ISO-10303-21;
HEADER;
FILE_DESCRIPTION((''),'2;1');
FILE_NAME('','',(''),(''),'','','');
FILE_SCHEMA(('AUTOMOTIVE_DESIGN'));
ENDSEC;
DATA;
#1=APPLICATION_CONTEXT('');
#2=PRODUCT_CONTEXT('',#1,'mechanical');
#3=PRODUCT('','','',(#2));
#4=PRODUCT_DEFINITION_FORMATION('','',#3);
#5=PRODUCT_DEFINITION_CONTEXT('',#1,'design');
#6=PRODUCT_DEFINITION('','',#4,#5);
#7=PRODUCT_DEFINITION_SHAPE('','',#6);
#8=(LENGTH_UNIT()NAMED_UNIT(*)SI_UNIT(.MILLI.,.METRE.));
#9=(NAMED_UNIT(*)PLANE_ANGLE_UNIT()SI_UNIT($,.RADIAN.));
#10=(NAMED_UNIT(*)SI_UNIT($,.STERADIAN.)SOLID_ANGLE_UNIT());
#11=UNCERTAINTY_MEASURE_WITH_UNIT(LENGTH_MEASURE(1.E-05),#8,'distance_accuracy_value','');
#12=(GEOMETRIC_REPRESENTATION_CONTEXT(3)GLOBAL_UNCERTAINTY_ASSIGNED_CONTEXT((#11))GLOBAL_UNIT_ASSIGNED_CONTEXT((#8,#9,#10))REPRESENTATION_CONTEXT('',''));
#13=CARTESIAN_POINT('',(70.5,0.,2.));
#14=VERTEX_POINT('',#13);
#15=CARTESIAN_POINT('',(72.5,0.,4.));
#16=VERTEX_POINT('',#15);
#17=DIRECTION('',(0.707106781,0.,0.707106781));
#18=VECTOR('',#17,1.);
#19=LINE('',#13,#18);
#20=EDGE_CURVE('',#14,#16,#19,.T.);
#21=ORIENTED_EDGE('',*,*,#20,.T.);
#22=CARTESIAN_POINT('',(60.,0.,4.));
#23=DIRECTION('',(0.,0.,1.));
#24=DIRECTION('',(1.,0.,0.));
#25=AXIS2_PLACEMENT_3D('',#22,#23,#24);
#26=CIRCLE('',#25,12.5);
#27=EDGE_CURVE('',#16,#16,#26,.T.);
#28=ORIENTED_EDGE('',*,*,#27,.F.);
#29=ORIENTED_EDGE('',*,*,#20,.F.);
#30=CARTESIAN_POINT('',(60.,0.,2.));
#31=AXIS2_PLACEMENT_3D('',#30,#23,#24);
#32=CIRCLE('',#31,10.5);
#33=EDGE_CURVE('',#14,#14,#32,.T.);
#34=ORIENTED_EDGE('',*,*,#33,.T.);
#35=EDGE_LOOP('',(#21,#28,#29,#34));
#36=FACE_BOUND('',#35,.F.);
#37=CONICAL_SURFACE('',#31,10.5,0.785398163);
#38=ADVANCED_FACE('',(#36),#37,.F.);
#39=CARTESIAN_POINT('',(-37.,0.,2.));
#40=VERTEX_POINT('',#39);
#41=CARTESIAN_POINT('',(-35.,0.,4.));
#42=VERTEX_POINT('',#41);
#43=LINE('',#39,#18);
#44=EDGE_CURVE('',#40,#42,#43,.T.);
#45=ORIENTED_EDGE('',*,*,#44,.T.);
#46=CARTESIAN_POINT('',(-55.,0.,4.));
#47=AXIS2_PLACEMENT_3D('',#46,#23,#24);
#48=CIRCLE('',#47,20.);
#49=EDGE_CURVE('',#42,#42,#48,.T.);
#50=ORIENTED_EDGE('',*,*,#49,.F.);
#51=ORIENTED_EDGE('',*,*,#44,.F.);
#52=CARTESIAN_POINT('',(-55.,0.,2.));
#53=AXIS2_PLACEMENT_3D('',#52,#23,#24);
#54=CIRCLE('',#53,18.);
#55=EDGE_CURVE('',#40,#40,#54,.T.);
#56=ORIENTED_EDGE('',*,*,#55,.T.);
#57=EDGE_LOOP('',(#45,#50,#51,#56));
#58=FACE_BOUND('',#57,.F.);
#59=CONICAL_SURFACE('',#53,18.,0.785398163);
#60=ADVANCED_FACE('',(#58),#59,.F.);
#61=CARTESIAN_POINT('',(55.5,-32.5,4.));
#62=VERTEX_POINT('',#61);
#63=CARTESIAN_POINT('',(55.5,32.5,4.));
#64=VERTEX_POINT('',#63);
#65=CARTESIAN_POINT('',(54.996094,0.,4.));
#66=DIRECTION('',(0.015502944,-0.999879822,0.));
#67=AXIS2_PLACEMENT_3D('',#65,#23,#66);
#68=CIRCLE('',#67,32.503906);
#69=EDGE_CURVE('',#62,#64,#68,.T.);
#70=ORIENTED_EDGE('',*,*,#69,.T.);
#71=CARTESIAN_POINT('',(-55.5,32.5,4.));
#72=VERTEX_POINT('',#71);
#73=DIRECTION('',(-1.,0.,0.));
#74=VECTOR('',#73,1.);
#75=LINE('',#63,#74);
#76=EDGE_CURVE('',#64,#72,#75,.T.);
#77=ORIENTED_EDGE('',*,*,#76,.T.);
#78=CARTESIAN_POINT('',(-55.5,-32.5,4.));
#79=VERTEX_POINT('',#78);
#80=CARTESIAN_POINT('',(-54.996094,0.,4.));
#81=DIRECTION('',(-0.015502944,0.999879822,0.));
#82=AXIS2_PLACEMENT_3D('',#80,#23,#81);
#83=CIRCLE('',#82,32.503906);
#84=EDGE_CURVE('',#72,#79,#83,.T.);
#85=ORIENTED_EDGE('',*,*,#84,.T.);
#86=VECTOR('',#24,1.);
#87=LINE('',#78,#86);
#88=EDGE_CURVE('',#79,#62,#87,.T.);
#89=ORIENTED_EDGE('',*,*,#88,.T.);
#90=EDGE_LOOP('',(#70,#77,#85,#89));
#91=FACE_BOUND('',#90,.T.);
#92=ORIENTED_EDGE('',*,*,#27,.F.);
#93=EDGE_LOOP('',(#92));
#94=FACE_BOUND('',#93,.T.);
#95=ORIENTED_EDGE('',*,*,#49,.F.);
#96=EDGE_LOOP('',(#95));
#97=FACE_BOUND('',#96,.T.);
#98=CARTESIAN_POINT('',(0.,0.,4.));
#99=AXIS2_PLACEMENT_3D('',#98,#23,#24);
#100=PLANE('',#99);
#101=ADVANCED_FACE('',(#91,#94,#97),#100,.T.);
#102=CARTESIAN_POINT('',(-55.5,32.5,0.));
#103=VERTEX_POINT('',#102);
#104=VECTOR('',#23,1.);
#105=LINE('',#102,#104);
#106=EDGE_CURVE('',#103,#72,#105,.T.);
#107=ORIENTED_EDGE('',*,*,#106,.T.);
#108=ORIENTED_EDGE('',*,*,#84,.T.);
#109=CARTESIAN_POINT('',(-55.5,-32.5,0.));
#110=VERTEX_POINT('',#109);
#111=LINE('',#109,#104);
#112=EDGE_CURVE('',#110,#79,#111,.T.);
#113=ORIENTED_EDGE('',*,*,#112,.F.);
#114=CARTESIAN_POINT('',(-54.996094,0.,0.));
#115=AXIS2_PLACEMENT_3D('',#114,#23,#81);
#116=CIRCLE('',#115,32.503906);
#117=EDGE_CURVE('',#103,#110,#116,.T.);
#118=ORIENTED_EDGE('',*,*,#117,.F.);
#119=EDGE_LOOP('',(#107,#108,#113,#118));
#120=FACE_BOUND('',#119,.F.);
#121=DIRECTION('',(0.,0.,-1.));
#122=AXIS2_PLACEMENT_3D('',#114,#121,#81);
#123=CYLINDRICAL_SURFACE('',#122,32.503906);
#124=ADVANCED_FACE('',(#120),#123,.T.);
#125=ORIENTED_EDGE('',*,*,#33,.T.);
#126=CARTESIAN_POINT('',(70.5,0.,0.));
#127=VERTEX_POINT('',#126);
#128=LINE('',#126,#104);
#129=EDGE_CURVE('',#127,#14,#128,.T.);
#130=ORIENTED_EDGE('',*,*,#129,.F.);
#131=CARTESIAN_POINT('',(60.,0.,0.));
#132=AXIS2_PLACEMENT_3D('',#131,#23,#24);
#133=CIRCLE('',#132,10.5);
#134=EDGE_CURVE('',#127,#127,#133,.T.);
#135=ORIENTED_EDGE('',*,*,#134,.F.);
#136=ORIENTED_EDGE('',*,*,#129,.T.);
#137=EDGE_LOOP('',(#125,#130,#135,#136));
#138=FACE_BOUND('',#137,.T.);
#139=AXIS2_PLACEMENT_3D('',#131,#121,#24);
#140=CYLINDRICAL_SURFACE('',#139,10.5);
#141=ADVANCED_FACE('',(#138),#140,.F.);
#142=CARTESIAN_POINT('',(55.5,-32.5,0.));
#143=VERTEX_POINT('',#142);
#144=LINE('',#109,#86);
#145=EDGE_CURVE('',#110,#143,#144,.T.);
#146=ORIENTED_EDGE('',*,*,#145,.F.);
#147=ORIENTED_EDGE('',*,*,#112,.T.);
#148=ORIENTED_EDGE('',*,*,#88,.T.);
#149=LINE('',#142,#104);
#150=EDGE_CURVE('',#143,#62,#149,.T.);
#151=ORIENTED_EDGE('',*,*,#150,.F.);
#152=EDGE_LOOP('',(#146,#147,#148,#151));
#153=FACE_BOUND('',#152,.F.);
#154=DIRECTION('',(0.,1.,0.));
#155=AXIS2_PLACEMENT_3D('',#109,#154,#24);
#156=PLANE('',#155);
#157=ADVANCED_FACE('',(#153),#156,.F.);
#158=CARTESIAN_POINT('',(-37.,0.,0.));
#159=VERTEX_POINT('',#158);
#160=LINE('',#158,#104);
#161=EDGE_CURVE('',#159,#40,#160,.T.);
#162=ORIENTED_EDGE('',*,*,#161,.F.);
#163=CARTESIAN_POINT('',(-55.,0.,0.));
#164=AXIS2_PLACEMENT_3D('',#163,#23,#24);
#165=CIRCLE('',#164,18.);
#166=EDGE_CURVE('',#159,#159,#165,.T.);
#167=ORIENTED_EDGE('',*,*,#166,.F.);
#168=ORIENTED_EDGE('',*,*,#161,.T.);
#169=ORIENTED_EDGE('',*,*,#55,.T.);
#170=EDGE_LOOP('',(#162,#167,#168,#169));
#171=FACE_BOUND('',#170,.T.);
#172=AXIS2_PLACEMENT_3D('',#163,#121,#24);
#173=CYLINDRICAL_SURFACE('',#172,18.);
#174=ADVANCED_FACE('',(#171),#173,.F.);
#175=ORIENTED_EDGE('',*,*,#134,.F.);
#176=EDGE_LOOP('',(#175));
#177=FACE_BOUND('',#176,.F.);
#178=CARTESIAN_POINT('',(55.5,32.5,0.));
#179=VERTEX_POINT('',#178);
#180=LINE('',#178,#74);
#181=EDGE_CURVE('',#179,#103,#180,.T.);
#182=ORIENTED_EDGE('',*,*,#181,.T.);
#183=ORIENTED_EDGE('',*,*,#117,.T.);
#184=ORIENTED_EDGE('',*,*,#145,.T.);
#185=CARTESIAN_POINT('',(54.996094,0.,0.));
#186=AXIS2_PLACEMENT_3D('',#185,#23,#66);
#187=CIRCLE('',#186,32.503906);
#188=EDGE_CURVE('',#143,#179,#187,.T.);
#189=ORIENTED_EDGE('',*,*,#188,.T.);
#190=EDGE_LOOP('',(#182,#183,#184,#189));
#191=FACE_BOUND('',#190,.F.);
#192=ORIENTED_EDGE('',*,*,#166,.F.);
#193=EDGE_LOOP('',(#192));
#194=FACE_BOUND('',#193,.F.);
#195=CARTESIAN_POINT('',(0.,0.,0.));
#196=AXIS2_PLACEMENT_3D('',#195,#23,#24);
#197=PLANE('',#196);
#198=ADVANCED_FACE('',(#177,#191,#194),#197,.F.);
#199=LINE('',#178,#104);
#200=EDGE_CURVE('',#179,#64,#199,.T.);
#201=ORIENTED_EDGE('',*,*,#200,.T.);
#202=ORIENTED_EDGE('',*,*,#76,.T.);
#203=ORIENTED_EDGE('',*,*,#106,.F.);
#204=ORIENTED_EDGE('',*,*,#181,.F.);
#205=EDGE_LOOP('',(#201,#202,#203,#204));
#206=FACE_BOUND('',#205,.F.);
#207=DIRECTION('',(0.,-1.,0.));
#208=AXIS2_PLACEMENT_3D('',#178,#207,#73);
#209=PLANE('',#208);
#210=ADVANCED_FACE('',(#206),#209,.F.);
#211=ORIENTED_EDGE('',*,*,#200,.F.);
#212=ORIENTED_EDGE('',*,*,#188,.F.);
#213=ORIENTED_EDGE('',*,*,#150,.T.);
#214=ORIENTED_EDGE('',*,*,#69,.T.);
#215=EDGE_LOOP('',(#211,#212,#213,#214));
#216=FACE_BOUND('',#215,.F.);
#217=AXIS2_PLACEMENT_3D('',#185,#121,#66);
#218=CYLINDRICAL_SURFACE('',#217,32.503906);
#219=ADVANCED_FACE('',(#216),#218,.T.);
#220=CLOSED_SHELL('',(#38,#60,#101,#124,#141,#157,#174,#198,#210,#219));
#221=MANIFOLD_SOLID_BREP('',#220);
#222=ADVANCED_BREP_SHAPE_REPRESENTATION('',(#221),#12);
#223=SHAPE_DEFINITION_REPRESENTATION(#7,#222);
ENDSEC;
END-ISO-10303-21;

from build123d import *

# Parameters (mm, degrees)
F0_R     = 18
F0_R_2   = 10.5
F1_DEPTH = 4
F2_SIZE  = 2


# Not quite as in the source:
# - a feature names something its author has since deleted; it is built from what else it names


with BuildPart() as f1:
    # F0 (on Top) → F1 (new body)
    with BuildSketch(Plane.XY):
        with BuildLine():
            ThreePointArc((-55.5, 32.5), (-87.5, 0), (-55.5, -32.5))
            Line((-55.5, -32.5), (55.5, -32.5))
            ThreePointArc((55.5, -32.5), (87.5, 0), (55.5, 32.5))
            Line((55.5, 32.5), (-55.5, 32.5))
        make_face()
        with Locations((-55, 0)):
            Circle(F0_R, mode=Mode.SUBTRACT)
        with Locations((60, 0)):
            Circle(F0_R_2, mode=Mode.SUBTRACT)
    extrude(amount=F1_DEPTH)

    # F2
    f2_edges = [f1.edges().sort_by_distance(p)[0] for p in [
        (-73, 0, 4),
        (49.5, 0, 4),
    ]]
    chamfer(f2_edges, length=F2_SIZE)


solid = f1.part
